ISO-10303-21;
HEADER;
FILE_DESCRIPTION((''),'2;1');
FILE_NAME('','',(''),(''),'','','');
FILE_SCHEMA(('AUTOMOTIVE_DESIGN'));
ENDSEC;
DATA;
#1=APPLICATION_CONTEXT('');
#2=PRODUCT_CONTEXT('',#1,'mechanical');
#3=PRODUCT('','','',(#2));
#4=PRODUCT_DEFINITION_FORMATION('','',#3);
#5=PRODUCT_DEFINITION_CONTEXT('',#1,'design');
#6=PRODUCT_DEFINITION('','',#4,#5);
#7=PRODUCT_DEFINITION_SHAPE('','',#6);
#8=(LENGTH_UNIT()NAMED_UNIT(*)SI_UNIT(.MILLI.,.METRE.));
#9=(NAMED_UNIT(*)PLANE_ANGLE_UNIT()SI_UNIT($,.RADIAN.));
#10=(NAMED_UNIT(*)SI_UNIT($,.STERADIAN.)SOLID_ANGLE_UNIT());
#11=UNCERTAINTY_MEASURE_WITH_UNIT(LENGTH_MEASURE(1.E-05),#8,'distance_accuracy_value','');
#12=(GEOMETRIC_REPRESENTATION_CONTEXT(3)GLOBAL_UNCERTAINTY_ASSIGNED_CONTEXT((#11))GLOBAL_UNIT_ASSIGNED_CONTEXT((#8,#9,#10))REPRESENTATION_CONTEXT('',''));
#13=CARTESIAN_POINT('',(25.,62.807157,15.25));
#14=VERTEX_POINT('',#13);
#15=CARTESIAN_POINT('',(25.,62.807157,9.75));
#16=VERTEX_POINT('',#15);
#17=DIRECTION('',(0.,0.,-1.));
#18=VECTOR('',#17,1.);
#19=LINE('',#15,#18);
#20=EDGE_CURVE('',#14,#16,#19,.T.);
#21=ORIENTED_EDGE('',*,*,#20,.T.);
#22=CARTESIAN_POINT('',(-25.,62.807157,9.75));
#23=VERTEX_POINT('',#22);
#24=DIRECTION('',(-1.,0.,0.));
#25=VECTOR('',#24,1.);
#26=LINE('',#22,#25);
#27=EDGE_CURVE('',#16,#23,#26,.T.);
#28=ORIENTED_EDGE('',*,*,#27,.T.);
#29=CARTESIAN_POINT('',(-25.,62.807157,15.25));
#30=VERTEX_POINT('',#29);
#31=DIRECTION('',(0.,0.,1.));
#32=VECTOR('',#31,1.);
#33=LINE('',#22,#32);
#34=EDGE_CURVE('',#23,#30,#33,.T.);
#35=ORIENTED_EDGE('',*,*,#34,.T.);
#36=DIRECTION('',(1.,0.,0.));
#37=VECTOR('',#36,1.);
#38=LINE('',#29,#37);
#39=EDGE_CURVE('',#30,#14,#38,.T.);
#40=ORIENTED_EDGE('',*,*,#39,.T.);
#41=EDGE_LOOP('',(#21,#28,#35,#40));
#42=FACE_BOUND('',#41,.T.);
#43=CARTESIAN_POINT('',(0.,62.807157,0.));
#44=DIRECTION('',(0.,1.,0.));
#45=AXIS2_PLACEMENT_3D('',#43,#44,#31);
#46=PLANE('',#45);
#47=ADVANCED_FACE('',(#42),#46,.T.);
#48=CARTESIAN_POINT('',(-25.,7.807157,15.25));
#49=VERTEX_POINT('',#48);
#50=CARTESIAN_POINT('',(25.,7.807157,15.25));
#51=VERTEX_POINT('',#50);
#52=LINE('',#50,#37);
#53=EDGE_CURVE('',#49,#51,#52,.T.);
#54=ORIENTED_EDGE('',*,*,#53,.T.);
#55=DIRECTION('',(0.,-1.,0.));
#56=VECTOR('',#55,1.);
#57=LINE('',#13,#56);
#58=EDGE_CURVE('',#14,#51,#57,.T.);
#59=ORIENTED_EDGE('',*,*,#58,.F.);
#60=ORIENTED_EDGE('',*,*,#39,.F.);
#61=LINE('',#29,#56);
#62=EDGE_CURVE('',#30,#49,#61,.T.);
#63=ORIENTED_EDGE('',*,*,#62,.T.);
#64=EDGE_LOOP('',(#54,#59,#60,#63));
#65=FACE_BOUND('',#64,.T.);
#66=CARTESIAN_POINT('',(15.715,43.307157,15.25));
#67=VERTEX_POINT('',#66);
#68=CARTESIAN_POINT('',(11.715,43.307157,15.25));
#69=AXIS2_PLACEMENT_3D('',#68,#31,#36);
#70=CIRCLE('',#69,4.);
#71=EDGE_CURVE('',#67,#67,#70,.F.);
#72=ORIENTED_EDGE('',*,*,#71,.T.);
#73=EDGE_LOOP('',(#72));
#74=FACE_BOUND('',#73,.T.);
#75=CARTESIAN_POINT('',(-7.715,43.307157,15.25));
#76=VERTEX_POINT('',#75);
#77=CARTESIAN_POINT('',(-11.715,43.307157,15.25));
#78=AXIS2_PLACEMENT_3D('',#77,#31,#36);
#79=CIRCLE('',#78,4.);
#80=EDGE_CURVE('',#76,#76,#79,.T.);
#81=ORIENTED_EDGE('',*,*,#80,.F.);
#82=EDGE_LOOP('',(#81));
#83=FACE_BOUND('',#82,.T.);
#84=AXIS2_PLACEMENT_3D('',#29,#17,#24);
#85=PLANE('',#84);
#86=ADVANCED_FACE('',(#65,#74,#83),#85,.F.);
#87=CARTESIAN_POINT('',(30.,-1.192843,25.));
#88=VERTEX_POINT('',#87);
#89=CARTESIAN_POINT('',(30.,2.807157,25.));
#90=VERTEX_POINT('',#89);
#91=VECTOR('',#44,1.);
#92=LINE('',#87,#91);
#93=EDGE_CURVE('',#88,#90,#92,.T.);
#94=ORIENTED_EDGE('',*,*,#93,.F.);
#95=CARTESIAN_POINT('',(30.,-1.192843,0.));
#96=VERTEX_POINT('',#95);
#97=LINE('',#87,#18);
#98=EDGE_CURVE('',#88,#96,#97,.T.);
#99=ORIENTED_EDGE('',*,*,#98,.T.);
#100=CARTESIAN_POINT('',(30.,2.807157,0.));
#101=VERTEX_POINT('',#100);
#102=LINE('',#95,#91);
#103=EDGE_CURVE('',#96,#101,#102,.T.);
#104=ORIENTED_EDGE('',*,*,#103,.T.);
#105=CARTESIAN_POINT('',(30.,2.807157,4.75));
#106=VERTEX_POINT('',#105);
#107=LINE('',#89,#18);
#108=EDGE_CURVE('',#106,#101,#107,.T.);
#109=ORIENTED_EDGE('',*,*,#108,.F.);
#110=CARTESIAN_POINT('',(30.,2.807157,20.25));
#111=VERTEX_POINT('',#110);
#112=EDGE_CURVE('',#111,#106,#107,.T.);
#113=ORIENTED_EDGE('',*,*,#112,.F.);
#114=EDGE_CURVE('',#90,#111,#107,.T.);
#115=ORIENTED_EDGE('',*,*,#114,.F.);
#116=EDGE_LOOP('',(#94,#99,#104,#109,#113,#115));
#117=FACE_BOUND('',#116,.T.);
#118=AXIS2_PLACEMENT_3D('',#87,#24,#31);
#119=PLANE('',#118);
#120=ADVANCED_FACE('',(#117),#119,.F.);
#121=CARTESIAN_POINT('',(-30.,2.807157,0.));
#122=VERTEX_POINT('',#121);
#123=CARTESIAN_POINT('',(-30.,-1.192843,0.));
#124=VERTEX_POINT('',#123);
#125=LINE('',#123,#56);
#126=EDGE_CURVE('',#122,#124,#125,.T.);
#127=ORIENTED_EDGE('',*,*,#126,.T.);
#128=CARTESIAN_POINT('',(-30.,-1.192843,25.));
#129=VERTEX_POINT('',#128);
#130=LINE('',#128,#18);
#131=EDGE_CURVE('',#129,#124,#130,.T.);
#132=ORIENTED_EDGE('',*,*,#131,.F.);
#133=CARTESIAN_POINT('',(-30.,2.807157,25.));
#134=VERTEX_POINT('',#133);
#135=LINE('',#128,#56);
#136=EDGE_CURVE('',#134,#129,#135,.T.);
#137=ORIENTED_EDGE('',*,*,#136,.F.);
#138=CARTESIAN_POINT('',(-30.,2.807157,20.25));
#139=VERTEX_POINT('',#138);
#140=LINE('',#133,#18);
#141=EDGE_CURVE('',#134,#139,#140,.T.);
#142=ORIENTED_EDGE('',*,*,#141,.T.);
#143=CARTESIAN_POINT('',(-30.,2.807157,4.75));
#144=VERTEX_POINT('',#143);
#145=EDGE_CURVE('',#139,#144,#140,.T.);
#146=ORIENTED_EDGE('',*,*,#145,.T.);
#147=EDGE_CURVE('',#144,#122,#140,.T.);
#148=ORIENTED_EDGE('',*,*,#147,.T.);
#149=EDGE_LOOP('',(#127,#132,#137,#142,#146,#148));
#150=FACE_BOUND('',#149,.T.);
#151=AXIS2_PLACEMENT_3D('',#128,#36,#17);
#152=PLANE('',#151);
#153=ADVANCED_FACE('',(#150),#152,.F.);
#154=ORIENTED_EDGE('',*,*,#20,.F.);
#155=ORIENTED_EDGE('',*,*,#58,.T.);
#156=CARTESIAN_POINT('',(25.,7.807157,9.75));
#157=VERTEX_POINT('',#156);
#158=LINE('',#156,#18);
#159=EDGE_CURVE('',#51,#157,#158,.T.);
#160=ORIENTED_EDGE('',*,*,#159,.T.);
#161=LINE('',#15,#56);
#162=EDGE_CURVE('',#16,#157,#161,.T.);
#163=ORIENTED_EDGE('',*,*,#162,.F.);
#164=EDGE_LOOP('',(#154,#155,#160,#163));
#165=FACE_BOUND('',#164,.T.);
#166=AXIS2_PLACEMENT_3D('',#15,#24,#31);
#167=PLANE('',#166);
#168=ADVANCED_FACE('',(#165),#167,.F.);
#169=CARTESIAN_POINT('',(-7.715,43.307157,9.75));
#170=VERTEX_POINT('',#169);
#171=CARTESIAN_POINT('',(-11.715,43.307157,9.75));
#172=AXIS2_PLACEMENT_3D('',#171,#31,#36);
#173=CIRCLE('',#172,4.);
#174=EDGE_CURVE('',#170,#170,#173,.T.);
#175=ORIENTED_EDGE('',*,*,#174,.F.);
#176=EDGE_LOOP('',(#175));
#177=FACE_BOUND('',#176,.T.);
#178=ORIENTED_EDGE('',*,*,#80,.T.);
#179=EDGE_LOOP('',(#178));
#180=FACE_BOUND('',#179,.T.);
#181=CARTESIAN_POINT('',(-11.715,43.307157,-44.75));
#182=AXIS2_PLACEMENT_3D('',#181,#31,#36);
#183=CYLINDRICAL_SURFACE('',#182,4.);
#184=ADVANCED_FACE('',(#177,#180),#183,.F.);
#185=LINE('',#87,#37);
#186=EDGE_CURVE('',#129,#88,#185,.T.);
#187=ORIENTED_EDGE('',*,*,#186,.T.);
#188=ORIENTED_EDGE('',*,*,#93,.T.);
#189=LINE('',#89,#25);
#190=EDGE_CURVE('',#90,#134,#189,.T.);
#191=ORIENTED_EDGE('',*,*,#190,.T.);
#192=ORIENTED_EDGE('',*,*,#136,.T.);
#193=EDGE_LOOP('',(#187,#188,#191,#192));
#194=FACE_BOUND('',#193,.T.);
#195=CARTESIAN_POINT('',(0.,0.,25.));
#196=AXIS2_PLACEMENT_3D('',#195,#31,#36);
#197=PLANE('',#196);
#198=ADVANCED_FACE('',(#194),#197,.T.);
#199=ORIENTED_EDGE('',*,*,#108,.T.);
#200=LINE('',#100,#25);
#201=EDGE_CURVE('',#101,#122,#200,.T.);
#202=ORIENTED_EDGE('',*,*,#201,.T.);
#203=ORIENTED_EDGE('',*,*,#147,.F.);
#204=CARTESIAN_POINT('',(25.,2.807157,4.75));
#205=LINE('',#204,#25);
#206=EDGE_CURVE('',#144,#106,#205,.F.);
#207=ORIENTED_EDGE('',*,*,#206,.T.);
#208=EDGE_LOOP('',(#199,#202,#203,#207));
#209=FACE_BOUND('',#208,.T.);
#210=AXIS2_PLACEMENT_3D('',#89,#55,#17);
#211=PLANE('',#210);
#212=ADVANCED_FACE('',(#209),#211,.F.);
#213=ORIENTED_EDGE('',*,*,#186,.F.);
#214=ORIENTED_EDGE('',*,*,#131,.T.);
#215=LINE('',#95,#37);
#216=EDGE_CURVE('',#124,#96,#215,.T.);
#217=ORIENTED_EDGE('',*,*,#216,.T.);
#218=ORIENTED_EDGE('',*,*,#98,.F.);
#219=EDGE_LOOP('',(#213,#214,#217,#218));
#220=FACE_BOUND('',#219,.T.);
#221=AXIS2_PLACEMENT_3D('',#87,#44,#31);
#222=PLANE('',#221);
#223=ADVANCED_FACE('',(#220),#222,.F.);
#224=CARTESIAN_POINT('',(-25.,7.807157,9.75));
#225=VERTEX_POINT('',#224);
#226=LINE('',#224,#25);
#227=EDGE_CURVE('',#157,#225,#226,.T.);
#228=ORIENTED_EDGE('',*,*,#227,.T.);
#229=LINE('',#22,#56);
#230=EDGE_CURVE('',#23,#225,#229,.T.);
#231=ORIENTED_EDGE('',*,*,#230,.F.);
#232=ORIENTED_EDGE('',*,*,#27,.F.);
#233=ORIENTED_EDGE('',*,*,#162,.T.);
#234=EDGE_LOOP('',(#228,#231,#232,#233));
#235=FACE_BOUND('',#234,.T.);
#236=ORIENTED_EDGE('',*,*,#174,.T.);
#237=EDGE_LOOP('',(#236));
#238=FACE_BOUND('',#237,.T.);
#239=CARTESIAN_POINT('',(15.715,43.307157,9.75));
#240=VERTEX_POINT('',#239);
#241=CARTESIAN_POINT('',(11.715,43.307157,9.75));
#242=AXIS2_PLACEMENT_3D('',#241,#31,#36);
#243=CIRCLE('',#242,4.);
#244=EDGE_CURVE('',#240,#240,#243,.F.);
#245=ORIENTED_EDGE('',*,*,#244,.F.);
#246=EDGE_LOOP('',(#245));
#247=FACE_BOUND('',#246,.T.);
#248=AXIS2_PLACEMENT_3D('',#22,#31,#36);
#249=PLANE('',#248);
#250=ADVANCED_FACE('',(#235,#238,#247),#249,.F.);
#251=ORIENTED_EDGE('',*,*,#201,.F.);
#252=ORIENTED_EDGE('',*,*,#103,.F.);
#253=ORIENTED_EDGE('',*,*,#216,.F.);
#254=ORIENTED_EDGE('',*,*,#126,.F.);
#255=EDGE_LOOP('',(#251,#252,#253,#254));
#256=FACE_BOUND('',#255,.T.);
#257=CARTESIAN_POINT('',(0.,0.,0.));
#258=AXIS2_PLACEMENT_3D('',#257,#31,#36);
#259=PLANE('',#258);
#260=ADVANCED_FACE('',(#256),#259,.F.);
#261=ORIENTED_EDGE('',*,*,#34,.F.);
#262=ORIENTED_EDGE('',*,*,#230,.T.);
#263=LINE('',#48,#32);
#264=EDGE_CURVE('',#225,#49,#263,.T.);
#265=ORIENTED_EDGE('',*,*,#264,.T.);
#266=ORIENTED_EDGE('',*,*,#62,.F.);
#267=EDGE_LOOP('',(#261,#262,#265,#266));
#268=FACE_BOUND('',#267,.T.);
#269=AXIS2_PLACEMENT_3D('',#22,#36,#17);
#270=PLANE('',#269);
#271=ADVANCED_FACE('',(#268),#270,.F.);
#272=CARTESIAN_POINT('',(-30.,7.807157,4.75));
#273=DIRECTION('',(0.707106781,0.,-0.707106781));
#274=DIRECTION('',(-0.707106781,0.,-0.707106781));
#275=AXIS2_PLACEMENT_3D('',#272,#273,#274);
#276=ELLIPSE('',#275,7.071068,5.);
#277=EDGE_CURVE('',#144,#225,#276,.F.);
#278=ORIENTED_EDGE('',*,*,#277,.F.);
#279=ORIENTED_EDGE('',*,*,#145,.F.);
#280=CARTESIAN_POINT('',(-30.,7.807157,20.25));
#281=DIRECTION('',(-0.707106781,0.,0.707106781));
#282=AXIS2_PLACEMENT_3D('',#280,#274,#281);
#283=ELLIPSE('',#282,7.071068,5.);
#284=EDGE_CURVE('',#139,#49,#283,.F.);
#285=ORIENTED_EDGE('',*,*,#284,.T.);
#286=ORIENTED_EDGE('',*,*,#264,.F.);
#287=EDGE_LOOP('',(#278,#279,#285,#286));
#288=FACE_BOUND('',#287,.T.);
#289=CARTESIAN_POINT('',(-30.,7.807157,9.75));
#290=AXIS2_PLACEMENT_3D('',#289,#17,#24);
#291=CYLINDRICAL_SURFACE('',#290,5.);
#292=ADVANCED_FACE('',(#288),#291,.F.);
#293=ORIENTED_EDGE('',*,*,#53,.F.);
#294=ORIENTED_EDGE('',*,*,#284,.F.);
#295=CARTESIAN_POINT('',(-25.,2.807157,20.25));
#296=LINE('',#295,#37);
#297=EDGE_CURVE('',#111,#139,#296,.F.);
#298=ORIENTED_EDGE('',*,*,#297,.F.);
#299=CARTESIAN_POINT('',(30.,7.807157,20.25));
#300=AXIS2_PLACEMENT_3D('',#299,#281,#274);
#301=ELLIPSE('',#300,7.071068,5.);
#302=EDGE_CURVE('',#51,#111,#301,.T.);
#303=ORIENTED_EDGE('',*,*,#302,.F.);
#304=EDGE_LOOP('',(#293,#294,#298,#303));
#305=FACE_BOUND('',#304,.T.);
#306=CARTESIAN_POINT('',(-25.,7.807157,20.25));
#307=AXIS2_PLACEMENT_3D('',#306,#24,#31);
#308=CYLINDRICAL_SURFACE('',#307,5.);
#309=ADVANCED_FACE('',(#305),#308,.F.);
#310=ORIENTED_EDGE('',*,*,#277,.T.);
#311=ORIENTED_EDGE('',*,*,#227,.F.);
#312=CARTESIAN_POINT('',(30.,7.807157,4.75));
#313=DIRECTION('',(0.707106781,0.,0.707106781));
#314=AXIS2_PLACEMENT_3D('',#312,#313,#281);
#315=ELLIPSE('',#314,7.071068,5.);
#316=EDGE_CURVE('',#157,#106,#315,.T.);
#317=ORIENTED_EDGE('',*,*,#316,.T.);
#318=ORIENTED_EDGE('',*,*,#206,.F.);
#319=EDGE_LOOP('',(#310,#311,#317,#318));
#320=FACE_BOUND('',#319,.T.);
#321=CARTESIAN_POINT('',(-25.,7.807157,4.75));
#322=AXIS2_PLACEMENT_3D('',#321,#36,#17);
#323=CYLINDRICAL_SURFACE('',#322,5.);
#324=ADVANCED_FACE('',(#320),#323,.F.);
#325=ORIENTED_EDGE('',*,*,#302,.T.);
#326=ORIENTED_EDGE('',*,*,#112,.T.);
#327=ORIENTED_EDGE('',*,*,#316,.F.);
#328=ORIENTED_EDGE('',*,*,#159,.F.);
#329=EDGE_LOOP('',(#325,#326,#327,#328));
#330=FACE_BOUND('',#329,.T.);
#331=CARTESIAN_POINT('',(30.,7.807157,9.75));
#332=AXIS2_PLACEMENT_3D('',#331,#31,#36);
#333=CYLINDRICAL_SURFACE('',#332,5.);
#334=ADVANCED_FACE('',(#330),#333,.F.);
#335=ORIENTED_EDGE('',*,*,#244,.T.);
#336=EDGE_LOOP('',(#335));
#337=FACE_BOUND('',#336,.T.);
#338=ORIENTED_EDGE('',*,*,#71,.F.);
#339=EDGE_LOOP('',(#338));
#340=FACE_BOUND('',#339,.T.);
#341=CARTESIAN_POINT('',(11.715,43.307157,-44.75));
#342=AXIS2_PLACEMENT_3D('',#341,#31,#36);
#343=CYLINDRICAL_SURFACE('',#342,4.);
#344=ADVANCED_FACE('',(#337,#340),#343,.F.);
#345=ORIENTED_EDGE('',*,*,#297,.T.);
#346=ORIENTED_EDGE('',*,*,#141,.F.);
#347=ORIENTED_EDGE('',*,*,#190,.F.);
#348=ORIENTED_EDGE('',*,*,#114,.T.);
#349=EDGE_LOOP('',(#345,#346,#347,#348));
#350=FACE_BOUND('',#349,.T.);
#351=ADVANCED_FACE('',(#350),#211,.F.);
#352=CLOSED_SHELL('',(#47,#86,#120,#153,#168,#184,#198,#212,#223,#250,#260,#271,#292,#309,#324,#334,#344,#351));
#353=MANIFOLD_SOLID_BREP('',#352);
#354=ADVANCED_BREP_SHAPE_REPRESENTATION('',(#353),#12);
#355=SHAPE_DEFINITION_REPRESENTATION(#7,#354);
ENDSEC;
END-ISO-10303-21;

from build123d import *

# Parameters (mm, degrees)
SKETCH1_W           = 60
SKETCH1_H           = 4
BOSS_EXTRUDE1_DEPTH = 25
SKETCH2_W           = 50
SKETCH2_H           = 5.5
BOSS_EXTRUDE2_DEPTH = 60
FILLET1_R           = 5
SKETCH3_R           = 4
CUT_EXTRUDE1_DEPTH  = 60


with BuildPart() as part:
    # Sketch1 → Boss-Extrude1 (new body)
    with BuildSketch(Plane.XY):
        with Locations((0, 0.807157058)):
            Rectangle(SKETCH1_W, SKETCH1_H)
    extrude(amount=BOSS_EXTRUDE1_DEPTH)

    # Sketch2 → Boss-Extrude2 (add)
    with BuildSketch(Plane(origin=(0, 2.807157058, 0), x_dir=(1, 0, 0), z_dir=(0, 1, 0))):
        with Locations((0, -12.5)):
            Rectangle(SKETCH2_W, SKETCH2_H)
    extrude(amount=BOSS_EXTRUDE2_DEPTH)

    # Fillet1
    fillet1_edges = [part.edges().sort_by_distance(p)[0] for p in [
        (25, 2.807157058, 12.5),
        (0, 2.807157058, 9.75),
        (-25, 2.807157058, 12.5),
        (0, 2.807157058, 15.25),
    ]]
    fillet(fillet1_edges, radius=FILLET1_R - 0.0001)  # a hair under: the kernel refuses the full size

    # Sketch3 → Cut-Extrude1 (cut)
    with BuildSketch(Plane.XY.offset(15.25)):
        with Locations((-11.715, 43.307157058)):
            Circle(SKETCH3_R)
        with Locations((11.715, 43.307157058)):
            Circle(SKETCH3_R)
    extrude(amount=-CUT_EXTRUDE1_DEPTH, mode=Mode.SUBTRACT)


solid = part.part
